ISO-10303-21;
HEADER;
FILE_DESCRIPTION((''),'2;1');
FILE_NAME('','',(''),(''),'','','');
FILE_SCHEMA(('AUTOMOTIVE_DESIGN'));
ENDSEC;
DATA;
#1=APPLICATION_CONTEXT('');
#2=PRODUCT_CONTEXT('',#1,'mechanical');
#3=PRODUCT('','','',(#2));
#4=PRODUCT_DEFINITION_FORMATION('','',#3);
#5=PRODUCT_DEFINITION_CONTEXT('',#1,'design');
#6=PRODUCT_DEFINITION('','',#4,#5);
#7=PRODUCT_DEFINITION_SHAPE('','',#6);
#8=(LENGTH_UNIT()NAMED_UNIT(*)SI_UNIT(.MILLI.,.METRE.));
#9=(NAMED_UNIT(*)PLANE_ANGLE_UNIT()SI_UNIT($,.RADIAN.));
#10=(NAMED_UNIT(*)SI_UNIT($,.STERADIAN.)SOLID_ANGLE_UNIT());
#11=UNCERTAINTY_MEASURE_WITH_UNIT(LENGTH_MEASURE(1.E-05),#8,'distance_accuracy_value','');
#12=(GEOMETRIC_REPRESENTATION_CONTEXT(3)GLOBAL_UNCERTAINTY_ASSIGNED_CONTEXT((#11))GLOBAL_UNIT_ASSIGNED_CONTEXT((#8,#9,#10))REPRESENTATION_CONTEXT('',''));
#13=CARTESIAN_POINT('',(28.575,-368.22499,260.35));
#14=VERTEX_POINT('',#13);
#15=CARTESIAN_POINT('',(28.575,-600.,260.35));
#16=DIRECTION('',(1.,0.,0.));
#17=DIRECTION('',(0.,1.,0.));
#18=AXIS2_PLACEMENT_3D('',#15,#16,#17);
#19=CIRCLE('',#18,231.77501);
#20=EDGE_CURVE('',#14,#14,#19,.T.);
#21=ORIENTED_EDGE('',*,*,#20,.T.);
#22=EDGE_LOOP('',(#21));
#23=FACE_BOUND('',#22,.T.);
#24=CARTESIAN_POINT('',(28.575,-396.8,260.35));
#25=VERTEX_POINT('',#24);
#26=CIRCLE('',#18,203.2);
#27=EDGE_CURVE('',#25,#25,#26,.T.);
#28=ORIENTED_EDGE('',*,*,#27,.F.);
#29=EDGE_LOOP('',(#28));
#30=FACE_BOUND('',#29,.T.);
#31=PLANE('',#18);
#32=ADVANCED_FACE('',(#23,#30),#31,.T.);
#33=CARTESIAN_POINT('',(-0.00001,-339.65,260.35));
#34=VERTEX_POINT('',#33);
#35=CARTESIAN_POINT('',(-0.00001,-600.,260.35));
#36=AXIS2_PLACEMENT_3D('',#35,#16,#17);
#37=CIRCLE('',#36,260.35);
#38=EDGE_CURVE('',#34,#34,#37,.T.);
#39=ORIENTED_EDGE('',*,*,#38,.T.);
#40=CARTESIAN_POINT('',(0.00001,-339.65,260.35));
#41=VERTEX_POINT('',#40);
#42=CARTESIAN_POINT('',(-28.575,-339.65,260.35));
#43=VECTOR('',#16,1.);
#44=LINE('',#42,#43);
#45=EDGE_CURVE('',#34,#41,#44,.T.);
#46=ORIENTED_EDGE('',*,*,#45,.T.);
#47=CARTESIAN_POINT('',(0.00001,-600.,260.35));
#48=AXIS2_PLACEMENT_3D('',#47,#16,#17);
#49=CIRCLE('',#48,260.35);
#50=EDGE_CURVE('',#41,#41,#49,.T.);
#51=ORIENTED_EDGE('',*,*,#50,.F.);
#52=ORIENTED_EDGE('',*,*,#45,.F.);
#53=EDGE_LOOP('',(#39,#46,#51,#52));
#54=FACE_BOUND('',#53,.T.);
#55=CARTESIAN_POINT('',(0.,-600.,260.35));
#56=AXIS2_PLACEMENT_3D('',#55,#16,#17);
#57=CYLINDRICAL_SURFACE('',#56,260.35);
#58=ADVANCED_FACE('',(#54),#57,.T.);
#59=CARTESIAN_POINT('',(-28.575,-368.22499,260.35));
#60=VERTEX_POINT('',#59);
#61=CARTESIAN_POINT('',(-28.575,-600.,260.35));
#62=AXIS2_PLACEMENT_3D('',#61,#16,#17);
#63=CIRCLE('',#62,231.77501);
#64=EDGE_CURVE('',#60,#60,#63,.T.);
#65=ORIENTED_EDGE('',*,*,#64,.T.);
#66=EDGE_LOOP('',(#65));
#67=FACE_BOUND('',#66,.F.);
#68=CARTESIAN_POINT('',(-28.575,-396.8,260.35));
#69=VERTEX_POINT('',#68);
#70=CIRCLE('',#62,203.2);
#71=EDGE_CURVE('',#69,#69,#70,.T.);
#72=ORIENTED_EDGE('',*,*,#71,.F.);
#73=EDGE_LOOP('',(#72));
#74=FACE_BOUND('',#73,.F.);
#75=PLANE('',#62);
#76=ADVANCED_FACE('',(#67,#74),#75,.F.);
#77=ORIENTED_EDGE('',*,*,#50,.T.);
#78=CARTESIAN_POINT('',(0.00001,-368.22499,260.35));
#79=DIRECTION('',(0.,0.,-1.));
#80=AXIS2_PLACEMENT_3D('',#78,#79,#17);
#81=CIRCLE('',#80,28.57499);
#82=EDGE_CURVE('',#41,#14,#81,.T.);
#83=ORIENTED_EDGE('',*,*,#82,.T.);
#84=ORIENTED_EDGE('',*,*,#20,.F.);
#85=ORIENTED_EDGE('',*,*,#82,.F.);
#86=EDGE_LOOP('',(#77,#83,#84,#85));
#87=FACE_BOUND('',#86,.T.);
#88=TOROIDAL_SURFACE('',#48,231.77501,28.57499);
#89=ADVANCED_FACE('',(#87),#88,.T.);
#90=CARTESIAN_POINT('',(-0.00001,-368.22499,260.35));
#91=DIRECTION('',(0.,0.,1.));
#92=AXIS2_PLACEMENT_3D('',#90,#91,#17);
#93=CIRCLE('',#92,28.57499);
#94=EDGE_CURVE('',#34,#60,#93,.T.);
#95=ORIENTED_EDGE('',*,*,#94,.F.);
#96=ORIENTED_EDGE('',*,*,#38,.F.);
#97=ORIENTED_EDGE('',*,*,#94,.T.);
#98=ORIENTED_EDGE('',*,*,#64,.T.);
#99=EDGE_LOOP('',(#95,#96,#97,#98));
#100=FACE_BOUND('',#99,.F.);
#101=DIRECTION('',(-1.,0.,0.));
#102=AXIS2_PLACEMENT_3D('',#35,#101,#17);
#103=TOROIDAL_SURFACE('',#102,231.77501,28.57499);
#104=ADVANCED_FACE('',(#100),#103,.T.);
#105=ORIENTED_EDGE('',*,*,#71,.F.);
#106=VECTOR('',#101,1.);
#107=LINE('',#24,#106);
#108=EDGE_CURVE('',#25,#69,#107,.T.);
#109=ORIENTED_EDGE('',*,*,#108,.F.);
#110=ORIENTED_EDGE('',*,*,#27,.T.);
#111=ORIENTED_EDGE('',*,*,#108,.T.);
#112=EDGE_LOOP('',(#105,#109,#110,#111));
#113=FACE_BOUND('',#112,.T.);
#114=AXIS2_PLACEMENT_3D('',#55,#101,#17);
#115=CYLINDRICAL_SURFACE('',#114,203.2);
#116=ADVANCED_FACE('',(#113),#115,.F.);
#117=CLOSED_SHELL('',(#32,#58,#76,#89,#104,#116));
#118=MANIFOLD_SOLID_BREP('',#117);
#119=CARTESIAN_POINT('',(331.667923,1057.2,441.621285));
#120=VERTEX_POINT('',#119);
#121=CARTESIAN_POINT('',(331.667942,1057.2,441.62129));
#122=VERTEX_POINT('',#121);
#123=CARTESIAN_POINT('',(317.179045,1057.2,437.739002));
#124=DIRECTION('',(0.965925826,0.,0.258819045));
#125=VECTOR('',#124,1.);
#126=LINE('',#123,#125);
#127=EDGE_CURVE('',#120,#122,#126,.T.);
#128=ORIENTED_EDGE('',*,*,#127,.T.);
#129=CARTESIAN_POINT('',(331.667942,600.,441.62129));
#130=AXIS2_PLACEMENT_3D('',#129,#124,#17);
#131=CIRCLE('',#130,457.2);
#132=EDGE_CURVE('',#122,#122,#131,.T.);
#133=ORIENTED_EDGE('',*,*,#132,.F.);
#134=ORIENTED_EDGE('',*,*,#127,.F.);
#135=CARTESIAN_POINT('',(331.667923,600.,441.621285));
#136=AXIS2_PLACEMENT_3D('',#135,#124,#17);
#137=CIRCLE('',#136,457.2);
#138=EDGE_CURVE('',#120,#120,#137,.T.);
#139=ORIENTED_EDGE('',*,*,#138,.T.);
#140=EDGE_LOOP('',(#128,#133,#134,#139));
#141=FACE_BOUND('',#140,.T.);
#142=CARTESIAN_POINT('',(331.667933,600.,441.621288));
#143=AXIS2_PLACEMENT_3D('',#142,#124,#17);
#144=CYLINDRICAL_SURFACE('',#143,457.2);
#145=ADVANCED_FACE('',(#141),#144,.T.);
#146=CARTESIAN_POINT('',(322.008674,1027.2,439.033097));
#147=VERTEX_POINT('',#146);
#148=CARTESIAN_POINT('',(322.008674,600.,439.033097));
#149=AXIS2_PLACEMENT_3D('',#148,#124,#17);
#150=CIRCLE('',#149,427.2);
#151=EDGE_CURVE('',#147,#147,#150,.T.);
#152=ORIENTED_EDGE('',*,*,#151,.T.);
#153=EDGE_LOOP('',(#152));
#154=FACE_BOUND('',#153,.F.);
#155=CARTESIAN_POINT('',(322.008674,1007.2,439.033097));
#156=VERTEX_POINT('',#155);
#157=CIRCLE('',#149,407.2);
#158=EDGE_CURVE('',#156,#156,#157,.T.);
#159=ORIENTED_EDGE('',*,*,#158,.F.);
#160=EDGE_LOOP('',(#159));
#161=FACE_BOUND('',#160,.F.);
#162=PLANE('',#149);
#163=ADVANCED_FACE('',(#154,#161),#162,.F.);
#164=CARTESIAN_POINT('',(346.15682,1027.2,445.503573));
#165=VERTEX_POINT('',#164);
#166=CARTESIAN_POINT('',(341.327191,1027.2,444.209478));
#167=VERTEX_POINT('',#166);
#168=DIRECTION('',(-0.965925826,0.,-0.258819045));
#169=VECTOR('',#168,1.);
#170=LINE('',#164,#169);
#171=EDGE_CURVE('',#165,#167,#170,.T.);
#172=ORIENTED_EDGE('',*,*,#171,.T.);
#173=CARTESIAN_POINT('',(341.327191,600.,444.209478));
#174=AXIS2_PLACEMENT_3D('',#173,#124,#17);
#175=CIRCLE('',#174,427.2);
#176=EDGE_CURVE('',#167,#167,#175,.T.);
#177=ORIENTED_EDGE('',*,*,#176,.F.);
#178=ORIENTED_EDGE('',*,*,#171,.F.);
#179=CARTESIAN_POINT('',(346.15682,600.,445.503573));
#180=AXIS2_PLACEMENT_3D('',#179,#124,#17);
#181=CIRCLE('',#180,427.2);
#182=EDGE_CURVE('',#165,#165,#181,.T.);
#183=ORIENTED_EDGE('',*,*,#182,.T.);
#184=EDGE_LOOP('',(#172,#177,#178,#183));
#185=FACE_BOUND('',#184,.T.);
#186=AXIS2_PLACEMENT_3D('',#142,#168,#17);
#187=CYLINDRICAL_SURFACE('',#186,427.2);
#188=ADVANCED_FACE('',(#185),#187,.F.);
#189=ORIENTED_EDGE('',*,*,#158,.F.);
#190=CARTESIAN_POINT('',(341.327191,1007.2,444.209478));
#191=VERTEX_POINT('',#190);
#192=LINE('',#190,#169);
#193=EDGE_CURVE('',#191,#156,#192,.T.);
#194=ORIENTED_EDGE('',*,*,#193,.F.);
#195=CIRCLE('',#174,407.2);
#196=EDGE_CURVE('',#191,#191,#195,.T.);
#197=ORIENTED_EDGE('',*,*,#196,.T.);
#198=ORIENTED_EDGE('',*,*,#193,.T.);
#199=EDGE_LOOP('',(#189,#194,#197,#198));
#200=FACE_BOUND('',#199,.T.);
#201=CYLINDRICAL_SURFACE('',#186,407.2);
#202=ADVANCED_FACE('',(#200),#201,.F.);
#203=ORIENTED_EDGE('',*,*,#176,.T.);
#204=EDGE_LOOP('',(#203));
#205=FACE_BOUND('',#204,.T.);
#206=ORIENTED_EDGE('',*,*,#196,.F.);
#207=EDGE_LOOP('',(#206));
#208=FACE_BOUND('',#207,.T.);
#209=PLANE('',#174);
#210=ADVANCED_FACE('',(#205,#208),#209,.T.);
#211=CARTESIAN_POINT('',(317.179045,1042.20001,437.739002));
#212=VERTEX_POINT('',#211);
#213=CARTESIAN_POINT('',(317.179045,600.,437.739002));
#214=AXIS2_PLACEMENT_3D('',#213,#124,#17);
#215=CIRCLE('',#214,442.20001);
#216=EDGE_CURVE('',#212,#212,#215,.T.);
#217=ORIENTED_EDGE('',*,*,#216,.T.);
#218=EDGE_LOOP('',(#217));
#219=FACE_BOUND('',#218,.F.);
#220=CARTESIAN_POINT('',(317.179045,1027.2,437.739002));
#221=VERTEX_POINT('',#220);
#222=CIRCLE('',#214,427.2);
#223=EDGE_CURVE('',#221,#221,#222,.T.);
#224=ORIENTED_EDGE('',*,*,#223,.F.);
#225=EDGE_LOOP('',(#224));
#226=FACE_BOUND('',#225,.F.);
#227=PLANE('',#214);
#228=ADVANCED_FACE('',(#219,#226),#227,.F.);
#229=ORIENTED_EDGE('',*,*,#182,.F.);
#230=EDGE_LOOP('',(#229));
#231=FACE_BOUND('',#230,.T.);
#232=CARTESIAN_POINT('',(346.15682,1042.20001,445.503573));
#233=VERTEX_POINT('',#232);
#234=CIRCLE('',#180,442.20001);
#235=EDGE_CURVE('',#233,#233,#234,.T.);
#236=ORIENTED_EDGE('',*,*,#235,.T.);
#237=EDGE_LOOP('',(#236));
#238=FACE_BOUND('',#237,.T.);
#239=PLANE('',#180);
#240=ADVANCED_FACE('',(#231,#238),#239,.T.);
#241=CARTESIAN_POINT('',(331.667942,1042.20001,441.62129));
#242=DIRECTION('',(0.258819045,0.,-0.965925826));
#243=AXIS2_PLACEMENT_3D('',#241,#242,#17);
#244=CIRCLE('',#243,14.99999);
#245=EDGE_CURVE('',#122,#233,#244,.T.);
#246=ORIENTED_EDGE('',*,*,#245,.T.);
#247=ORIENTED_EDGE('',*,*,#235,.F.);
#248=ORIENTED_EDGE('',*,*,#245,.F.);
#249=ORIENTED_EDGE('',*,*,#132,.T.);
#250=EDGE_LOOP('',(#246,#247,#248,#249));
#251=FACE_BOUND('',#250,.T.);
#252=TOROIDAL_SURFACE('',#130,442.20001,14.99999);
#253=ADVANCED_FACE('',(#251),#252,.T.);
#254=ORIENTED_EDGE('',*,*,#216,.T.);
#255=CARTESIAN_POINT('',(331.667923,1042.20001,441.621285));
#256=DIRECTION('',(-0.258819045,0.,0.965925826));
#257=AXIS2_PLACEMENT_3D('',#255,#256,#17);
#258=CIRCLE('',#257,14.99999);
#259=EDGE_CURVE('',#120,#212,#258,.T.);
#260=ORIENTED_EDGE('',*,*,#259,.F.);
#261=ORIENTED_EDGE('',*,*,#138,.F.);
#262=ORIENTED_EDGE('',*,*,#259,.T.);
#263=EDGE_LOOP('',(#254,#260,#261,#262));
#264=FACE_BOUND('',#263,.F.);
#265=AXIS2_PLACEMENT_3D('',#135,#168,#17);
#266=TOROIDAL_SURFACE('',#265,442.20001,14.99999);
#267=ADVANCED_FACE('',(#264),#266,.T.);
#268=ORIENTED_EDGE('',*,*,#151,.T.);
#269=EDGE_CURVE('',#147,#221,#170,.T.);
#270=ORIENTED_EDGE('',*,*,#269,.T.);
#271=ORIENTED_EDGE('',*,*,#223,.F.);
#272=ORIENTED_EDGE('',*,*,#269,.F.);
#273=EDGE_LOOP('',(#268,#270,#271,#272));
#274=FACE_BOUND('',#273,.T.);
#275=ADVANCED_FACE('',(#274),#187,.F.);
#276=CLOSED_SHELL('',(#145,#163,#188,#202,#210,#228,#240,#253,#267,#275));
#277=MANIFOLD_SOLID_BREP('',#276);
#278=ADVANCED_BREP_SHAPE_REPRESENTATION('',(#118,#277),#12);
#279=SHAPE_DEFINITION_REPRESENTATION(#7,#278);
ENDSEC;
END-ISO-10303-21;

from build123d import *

# Parameters (mm, degrees)
F10_R     = 260.35
F10_R_2   = 203.2
F11_DEPTH = 28.575
F12_R     = 28.57499
F14_R     = 457.2
F14_R_2   = 427.2
F15_DEPTH = 15
F16_R     = 14.99999
F17_R     = 427.2
F17_R_2   = 407.2
F18_DEPTH = 10


# Not quite as in the source:
# - a fillet or chamfer is up to 0.001 mm smaller than in the source, because OpenCascade refuses the exact size


with BuildPart() as f11:
    # F10 (on Right) → F11 (new body, symmetric)
    with BuildSketch(Plane.YZ):
        with Locations((-600, 260.35)):
            Circle(F10_R)
        with Locations((-600, 260.35)):
            Circle(F10_R_2, mode=Mode.SUBTRACT)
    extrude(amount=F11_DEPTH, both=True)

    # F12 (radius 28.575 in the source; OpenCascade refuses exactly that, so slightly less here)
    f12_edges = [f11.edges().sort_by_distance(p)[0] for p in [
        (-28.575, -860.35, 260.35),
        (0, -339.65, 260.35),
        (28.575, -860.35, 260.35),
    ]]
    fillet(f12_edges, radius=F12_R)


with BuildPart() as f15:
    # F14 (on face) → F15 (new body, symmetric)
    with BuildSketch(Plane(origin=(419.8557158515, 0, 112.5), x_dir=(0, 1, 0), z_dir=(0.9659258263, 0, 0.2588190451))):
        with Locations((600, 340.7314297039)):
            Circle(F14_R)
        with Locations((600, 340.7314297039)):
            Circle(F14_R_2, mode=Mode.SUBTRACT)
    extrude(amount=F15_DEPTH, both=True)

    # F16 (radius 15 in the source; OpenCascade refuses exactly that, so slightly less here)
    f16_edges = [f15.edges().sort_by_distance(p)[0] for p in [
        (317.179045, 142.8, 437.739002),
        (331.667933, 1057.2, 441.621288),
        (346.15682, 142.8, 445.503573),
    ]]
    fillet(f16_edges, radius=F16_R)

    # F17 (on face) → F18 (join, symmetric)
    with BuildSketch(Plane(origin=(419.8557158515, 0, 112.5), x_dir=(0, 1, 0), z_dir=(0.9659258263, 0, 0.2588190451))):
        with Locations((600, 340.7314297039)):
            Circle(F17_R)
        with Locations((600, 340.7314297039)):
            Circle(F17_R_2, mode=Mode.SUBTRACT)
    extrude(amount=F18_DEPTH, both=True)


solid = Compound([f11.part, f15.part])
